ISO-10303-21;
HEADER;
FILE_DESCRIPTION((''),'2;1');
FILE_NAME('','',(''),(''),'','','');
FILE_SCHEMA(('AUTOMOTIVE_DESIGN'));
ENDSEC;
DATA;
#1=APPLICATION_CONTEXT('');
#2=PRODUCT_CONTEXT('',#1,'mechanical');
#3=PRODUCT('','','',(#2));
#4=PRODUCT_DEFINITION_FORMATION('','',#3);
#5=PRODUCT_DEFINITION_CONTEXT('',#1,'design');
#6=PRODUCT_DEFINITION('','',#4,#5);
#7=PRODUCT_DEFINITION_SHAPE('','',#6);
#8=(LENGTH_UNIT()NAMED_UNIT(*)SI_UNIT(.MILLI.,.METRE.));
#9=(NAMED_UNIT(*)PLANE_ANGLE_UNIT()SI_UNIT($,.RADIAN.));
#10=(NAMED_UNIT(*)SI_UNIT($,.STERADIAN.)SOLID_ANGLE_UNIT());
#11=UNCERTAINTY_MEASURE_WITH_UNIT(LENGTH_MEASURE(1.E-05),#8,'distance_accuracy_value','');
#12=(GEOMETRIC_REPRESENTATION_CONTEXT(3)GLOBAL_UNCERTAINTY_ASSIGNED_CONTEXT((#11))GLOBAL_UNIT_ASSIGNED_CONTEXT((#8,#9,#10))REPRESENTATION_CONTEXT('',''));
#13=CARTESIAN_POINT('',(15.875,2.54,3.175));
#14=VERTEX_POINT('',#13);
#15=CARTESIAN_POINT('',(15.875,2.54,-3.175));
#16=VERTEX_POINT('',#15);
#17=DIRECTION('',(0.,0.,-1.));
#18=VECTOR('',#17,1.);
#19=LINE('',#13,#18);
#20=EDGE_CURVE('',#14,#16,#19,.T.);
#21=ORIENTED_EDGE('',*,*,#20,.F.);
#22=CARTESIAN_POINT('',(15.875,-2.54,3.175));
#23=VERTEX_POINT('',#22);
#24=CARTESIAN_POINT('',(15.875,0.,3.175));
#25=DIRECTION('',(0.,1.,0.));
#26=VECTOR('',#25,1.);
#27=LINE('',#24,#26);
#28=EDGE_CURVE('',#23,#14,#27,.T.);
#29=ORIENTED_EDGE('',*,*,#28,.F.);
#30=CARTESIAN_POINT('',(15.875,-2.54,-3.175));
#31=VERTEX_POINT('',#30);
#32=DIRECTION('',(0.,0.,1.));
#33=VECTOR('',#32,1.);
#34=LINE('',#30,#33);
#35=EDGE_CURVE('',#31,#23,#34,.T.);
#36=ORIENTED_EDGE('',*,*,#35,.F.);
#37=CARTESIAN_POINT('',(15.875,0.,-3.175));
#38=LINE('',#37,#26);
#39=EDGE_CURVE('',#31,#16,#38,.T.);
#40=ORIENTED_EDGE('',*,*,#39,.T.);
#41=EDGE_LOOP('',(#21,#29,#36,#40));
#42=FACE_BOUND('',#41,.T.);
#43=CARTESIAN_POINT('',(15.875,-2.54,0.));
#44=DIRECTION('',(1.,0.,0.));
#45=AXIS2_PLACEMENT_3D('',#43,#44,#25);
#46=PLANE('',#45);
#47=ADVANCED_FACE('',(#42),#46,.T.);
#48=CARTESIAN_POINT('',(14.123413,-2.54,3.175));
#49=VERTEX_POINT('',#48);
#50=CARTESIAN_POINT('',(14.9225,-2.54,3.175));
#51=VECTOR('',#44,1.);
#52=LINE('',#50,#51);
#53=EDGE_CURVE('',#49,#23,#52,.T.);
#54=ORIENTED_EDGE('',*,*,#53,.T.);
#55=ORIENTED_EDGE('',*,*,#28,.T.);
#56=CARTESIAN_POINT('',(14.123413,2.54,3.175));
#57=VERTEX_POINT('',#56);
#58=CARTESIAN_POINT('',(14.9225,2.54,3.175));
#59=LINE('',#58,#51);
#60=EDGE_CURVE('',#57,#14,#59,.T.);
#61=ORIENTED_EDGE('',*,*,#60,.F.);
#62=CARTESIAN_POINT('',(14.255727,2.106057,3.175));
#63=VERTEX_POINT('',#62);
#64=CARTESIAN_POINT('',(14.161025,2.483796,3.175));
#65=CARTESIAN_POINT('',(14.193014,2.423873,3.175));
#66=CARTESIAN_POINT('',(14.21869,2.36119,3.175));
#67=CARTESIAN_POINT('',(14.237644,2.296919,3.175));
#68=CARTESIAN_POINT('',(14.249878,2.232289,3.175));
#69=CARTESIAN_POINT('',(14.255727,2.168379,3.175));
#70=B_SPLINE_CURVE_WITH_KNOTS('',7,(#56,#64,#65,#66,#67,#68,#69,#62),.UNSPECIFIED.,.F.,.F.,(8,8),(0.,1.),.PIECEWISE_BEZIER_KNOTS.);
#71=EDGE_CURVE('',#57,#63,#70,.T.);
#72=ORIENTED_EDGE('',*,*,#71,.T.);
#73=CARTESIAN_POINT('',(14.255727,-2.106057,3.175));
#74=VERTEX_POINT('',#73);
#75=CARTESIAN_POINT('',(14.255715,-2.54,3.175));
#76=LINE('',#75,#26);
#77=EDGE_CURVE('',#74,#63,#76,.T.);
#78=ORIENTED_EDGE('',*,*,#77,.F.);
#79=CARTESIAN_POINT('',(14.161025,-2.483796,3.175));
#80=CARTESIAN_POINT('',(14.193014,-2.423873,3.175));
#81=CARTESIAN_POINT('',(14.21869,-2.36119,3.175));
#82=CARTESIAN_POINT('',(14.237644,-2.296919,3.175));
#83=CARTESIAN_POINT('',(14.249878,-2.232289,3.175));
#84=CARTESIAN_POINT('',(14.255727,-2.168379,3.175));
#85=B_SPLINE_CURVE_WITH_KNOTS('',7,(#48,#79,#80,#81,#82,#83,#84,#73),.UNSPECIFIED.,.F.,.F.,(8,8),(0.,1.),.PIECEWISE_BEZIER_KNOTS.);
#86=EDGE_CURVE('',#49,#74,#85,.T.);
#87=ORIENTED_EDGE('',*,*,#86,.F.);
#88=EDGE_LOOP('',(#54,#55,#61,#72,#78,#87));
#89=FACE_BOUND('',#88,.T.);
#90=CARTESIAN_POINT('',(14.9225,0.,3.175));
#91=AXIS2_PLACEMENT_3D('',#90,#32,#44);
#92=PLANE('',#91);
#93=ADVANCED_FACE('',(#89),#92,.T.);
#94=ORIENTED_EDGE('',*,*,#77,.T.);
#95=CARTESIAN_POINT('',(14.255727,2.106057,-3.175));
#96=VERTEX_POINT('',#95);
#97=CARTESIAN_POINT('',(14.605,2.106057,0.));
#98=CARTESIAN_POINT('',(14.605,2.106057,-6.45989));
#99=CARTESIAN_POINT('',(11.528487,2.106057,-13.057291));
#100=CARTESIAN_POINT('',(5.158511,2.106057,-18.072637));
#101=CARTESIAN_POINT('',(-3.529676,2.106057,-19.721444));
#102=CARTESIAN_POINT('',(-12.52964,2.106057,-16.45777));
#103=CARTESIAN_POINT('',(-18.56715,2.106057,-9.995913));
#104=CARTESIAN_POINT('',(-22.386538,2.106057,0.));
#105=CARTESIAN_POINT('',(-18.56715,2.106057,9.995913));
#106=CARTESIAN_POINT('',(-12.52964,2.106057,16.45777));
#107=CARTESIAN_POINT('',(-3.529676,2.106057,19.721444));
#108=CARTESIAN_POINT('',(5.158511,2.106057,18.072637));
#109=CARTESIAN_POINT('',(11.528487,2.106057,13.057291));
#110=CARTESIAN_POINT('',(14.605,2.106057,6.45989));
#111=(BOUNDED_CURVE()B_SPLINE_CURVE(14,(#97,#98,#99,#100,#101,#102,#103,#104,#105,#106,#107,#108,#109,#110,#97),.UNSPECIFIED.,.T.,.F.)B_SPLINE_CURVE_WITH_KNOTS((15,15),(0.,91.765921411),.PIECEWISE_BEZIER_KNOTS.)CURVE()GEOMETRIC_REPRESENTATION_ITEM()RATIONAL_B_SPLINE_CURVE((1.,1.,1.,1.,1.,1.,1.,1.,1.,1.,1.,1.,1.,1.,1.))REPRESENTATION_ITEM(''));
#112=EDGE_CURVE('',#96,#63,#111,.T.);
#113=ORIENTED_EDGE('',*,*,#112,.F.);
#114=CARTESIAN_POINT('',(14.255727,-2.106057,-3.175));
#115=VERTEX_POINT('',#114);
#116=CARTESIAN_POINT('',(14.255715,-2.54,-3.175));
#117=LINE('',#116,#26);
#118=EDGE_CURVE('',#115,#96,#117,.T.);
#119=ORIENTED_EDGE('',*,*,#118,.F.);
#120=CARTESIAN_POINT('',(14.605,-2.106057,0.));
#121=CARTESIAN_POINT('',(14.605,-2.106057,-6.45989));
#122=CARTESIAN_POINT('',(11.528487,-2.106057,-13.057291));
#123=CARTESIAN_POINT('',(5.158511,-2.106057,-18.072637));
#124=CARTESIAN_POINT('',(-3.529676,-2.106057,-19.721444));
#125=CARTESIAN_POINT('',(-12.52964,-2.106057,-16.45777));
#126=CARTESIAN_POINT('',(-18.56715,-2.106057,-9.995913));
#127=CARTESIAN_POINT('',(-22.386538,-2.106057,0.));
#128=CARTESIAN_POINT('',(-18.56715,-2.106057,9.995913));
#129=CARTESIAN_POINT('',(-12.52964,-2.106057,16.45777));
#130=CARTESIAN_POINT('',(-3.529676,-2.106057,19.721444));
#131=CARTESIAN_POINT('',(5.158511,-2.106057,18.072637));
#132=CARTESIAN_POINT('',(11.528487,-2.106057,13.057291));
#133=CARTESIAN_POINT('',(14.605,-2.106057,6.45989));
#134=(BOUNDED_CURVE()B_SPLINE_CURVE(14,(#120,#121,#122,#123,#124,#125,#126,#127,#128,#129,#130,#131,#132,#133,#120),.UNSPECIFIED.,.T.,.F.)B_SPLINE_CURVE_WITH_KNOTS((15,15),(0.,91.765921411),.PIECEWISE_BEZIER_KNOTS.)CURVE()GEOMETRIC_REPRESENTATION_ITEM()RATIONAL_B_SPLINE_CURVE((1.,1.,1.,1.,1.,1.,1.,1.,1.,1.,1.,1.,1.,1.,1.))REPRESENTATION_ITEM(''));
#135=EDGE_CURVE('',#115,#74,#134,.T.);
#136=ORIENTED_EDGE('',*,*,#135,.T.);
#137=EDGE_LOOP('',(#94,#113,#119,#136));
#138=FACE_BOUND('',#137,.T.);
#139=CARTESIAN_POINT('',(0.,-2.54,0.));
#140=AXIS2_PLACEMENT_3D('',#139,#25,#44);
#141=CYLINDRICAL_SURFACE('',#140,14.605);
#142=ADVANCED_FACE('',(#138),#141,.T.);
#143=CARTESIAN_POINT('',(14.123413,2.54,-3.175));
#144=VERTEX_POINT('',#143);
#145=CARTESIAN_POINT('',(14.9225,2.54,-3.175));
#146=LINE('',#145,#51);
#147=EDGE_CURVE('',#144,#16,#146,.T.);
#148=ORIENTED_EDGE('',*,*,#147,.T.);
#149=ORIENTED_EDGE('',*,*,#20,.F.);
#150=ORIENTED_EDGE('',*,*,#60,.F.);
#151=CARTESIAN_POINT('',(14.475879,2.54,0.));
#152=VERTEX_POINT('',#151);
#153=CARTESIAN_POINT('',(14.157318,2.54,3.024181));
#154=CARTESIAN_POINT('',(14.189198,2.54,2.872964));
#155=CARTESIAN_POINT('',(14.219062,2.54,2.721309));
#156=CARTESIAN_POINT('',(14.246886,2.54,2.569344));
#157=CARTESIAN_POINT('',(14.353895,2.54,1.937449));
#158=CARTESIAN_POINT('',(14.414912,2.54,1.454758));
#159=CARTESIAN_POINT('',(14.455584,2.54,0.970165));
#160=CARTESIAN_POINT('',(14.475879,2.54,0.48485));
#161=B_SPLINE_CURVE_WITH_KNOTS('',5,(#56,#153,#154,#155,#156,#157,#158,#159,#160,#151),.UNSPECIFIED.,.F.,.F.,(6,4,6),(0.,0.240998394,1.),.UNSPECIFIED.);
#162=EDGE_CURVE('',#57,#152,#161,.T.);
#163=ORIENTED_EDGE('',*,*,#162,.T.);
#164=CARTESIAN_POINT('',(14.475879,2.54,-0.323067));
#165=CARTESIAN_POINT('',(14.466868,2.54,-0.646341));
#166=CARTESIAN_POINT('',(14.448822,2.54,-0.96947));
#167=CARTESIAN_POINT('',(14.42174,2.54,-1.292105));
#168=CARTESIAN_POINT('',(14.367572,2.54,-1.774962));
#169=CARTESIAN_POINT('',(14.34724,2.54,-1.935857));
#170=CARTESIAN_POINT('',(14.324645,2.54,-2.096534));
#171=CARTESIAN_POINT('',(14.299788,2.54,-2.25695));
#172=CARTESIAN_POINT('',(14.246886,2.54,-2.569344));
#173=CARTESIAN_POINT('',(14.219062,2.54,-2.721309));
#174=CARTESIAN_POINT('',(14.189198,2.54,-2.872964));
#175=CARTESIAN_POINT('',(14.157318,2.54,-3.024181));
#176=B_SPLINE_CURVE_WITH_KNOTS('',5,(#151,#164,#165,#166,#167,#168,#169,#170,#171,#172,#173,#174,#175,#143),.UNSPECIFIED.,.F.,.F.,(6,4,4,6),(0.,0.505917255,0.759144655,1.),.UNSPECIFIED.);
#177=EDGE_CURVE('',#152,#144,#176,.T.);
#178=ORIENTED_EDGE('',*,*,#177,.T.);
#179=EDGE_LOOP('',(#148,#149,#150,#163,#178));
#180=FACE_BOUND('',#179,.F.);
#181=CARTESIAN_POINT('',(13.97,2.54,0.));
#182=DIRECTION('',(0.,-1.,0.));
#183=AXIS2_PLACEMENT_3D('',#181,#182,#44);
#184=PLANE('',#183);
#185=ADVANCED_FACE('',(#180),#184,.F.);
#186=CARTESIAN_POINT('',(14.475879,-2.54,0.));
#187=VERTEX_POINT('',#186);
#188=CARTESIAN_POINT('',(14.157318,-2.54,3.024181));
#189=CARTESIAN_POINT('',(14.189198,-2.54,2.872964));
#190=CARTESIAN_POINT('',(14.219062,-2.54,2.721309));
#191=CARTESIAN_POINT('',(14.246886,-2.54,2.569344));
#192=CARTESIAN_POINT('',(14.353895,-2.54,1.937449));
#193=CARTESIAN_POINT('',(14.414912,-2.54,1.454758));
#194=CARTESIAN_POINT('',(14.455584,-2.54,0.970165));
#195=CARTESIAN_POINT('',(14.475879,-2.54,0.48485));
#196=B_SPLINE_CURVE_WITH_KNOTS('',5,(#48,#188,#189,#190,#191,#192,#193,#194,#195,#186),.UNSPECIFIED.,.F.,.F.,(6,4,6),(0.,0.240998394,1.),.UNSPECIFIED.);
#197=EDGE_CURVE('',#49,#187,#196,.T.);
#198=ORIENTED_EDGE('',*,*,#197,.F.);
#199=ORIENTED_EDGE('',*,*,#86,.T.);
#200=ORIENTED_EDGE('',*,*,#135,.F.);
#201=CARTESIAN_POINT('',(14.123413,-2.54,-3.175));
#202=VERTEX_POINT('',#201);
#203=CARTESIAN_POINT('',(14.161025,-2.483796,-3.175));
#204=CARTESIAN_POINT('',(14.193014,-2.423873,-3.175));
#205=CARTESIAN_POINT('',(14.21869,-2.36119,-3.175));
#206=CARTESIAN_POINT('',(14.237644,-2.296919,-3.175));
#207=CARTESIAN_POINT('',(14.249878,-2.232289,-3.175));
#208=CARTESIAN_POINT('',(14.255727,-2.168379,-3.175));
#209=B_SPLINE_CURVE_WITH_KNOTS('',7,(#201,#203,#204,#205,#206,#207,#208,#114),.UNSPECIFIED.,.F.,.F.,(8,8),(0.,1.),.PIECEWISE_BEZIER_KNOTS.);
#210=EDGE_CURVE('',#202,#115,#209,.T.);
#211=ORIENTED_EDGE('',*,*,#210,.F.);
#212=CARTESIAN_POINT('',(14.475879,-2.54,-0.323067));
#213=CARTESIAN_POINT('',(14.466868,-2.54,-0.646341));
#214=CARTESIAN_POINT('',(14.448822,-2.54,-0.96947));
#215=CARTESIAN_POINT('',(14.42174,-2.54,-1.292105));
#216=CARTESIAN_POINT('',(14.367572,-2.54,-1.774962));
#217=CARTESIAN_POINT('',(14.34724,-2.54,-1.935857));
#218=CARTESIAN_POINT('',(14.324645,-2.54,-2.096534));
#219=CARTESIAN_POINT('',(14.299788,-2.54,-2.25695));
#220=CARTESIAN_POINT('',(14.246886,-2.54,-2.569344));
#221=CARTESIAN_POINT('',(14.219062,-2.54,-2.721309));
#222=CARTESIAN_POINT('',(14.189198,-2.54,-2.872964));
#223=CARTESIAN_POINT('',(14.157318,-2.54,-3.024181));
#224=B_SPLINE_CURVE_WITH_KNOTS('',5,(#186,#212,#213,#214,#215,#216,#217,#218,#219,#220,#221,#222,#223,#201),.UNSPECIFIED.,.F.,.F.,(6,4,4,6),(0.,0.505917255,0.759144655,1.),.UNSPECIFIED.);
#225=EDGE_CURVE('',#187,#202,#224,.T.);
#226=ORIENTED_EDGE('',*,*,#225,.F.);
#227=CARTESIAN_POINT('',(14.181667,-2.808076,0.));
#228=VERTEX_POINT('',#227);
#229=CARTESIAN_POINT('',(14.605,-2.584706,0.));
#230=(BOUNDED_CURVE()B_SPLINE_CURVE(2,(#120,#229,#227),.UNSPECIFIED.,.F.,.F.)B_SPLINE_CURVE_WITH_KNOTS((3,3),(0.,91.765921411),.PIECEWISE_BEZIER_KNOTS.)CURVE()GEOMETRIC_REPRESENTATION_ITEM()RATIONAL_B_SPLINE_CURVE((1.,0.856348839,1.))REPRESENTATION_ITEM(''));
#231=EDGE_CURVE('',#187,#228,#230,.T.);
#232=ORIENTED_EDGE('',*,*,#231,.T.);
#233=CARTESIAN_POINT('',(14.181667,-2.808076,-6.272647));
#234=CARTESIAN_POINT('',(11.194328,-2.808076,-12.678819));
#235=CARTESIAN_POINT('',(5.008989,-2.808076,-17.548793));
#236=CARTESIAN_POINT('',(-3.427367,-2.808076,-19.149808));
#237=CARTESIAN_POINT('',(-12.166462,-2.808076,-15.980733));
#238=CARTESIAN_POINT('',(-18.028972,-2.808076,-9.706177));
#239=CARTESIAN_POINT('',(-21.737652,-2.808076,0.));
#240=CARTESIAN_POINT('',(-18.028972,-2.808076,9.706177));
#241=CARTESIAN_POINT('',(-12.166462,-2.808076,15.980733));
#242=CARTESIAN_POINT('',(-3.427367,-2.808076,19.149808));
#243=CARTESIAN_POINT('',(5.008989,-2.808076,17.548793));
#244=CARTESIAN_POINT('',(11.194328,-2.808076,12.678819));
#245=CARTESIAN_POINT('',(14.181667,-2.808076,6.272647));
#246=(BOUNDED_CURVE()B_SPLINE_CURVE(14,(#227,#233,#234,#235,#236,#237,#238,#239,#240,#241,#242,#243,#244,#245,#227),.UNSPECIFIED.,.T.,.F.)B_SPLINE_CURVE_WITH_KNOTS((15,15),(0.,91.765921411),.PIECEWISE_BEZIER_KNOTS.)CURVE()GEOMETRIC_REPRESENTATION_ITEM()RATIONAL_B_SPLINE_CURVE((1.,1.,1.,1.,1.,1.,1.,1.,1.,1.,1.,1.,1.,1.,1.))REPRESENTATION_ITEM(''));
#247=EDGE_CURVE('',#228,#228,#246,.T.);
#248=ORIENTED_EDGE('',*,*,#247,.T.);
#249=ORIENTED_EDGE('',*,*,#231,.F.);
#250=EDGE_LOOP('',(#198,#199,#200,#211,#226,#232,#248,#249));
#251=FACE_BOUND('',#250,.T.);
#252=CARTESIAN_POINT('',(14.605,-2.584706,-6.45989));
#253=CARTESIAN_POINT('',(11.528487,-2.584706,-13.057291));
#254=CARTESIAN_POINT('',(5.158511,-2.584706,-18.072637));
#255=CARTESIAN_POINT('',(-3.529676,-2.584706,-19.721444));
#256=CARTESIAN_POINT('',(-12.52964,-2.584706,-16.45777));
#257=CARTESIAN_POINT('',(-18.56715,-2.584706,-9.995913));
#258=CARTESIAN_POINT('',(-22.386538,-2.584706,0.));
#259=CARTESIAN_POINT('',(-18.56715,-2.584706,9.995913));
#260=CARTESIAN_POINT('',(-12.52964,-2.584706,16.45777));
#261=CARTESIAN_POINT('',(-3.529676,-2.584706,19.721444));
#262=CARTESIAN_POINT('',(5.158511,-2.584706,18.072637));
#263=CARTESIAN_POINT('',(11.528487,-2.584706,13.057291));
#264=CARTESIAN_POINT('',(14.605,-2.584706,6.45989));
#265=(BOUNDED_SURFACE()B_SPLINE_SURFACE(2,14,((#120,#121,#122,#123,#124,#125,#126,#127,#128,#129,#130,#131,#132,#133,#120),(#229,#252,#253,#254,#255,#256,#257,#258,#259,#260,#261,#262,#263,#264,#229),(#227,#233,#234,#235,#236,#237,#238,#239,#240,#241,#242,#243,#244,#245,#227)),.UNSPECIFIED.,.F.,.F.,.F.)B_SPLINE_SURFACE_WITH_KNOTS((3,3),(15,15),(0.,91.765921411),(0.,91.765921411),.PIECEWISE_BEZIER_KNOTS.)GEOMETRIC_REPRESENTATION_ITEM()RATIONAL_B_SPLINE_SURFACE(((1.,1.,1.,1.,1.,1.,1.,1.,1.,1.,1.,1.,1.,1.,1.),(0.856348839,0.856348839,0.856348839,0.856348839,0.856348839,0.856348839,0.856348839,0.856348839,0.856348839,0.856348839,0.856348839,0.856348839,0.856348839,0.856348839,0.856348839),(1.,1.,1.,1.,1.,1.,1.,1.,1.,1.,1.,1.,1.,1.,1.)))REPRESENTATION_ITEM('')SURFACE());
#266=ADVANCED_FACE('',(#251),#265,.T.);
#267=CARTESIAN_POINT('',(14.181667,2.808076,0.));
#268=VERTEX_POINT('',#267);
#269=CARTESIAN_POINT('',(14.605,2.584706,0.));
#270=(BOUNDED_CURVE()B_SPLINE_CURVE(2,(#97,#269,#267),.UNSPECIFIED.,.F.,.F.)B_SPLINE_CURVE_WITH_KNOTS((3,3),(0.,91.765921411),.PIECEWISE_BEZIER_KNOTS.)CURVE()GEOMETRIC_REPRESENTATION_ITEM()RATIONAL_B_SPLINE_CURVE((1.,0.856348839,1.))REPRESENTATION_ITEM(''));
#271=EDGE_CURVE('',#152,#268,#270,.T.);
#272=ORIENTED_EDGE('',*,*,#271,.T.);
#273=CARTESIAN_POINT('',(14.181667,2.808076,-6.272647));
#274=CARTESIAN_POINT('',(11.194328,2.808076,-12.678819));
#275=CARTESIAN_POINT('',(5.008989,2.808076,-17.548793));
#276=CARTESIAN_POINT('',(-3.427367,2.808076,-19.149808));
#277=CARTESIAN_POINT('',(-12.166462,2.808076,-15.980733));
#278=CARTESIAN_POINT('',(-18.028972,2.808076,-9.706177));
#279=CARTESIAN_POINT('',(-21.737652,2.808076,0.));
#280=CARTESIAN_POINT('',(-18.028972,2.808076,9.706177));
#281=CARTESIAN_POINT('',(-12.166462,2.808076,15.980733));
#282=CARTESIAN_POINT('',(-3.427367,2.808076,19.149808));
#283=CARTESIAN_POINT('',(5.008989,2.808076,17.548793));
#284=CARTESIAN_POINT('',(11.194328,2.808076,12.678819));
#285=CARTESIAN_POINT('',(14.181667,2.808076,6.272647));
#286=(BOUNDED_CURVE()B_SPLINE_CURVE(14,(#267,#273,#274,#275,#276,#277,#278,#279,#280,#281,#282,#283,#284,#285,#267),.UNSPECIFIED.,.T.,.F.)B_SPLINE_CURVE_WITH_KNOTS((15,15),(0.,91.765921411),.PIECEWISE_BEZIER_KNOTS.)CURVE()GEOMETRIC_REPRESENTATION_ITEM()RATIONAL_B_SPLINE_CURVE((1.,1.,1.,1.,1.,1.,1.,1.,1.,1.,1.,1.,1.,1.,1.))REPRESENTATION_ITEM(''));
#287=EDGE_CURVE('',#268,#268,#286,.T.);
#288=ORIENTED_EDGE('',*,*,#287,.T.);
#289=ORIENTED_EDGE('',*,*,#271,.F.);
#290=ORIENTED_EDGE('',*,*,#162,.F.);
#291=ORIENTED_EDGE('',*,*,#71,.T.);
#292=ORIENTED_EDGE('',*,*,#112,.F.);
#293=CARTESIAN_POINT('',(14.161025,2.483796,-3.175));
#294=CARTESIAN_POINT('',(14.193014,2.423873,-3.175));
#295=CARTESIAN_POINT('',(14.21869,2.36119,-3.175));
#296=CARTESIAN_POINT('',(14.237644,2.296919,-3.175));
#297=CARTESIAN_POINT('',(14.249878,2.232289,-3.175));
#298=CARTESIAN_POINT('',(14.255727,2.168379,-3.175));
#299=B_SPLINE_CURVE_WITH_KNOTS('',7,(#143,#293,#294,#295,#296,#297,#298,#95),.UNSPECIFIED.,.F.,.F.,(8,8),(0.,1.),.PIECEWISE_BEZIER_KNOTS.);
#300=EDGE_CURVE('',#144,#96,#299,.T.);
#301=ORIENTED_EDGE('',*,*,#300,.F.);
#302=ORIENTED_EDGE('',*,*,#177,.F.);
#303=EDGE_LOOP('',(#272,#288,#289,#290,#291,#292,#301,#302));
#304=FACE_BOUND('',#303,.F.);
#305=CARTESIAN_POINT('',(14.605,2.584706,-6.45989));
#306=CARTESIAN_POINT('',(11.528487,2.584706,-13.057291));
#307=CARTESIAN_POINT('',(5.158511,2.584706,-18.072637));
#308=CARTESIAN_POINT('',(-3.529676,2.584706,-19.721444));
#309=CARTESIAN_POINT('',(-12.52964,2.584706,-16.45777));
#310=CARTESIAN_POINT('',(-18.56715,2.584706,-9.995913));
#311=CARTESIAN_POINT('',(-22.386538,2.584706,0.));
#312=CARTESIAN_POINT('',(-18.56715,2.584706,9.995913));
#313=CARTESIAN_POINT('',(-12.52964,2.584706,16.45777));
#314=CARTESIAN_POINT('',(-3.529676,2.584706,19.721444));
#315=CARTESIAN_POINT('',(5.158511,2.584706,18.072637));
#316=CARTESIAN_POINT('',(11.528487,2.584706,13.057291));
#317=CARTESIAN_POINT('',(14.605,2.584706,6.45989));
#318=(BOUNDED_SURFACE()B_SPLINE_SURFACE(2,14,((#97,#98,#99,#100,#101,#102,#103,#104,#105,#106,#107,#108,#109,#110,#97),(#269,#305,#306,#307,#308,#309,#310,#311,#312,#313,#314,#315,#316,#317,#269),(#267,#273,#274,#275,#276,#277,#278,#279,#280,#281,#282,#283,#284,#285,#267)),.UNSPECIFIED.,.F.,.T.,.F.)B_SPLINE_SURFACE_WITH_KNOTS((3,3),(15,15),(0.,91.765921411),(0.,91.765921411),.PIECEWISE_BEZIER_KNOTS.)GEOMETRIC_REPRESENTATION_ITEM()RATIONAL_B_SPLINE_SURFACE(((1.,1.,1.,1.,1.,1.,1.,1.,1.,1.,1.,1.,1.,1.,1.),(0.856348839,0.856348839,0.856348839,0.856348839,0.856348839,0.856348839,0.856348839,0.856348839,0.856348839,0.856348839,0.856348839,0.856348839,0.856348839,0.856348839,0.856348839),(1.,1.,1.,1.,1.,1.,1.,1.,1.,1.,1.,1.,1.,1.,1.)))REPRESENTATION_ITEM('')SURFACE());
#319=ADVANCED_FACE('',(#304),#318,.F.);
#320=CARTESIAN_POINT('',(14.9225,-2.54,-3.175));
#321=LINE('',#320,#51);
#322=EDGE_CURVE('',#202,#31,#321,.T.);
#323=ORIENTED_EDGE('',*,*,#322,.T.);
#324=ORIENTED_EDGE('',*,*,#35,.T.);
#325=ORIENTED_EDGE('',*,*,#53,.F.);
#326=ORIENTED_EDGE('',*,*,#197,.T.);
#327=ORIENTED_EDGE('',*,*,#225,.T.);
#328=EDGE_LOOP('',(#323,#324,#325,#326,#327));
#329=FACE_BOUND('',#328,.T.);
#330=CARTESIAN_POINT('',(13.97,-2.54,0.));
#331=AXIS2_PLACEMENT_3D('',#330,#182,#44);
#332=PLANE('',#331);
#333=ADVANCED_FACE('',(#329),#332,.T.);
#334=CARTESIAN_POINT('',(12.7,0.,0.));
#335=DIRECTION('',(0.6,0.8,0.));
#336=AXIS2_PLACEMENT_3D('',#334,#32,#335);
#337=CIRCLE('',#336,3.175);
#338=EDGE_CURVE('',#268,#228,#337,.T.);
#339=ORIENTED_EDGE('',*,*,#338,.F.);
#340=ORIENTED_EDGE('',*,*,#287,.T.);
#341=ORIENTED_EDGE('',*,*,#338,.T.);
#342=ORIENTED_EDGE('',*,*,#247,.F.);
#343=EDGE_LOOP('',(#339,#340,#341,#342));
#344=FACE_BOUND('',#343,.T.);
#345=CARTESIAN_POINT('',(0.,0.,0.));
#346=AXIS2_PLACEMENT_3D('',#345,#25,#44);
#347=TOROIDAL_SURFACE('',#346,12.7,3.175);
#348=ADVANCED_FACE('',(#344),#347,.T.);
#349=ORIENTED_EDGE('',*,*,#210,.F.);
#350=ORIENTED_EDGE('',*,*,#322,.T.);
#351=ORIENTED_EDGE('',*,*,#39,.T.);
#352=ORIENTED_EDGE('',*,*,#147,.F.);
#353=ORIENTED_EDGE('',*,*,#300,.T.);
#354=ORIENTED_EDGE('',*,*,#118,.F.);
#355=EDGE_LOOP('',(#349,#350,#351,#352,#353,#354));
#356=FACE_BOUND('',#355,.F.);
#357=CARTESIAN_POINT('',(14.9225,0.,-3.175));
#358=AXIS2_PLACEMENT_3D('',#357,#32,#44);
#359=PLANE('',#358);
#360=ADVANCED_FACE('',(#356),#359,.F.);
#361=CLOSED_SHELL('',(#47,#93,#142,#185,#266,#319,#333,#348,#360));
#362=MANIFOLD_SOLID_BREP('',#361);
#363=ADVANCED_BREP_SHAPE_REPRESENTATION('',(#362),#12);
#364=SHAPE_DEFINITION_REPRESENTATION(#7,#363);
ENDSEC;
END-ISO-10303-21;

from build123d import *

# Parameters (mm, degrees)
F2_R     = 0.79375
F3_W     = 1.905
F3_H     = 5.08
F4_DEPTH = 3.175


with BuildPart() as f1:
    # F0 (on Top) → F1 (revolve)
    with BuildSketch(Plane.XY):
        with BuildLine():
            Line((14.605, -2.54), (14.605, 2.54))
            ThreePointArc((14.605, 2.54), (9.525, 0), (14.605, -2.54))
        make_face()
    revolve(axis=Axis((0, 7.2536539203, 0), (0, 1, 0)))

    # F2
    f2_edges = [f1.edges().sort_by_distance(p)[0] for p in [
        (-14.605, 2.54, 0),
        (-14.605, -2.54, 0),
    ]]
    fillet(f2_edges, radius=F2_R)

    # F3 (on Top) → F4 (join, symmetric)
    with BuildSketch(Plane.XY):
        with Locations((14.9225, 0)):
            Rectangle(F3_W, F3_H)
    extrude(amount=F4_DEPTH, both=True)


solid = f1.part
